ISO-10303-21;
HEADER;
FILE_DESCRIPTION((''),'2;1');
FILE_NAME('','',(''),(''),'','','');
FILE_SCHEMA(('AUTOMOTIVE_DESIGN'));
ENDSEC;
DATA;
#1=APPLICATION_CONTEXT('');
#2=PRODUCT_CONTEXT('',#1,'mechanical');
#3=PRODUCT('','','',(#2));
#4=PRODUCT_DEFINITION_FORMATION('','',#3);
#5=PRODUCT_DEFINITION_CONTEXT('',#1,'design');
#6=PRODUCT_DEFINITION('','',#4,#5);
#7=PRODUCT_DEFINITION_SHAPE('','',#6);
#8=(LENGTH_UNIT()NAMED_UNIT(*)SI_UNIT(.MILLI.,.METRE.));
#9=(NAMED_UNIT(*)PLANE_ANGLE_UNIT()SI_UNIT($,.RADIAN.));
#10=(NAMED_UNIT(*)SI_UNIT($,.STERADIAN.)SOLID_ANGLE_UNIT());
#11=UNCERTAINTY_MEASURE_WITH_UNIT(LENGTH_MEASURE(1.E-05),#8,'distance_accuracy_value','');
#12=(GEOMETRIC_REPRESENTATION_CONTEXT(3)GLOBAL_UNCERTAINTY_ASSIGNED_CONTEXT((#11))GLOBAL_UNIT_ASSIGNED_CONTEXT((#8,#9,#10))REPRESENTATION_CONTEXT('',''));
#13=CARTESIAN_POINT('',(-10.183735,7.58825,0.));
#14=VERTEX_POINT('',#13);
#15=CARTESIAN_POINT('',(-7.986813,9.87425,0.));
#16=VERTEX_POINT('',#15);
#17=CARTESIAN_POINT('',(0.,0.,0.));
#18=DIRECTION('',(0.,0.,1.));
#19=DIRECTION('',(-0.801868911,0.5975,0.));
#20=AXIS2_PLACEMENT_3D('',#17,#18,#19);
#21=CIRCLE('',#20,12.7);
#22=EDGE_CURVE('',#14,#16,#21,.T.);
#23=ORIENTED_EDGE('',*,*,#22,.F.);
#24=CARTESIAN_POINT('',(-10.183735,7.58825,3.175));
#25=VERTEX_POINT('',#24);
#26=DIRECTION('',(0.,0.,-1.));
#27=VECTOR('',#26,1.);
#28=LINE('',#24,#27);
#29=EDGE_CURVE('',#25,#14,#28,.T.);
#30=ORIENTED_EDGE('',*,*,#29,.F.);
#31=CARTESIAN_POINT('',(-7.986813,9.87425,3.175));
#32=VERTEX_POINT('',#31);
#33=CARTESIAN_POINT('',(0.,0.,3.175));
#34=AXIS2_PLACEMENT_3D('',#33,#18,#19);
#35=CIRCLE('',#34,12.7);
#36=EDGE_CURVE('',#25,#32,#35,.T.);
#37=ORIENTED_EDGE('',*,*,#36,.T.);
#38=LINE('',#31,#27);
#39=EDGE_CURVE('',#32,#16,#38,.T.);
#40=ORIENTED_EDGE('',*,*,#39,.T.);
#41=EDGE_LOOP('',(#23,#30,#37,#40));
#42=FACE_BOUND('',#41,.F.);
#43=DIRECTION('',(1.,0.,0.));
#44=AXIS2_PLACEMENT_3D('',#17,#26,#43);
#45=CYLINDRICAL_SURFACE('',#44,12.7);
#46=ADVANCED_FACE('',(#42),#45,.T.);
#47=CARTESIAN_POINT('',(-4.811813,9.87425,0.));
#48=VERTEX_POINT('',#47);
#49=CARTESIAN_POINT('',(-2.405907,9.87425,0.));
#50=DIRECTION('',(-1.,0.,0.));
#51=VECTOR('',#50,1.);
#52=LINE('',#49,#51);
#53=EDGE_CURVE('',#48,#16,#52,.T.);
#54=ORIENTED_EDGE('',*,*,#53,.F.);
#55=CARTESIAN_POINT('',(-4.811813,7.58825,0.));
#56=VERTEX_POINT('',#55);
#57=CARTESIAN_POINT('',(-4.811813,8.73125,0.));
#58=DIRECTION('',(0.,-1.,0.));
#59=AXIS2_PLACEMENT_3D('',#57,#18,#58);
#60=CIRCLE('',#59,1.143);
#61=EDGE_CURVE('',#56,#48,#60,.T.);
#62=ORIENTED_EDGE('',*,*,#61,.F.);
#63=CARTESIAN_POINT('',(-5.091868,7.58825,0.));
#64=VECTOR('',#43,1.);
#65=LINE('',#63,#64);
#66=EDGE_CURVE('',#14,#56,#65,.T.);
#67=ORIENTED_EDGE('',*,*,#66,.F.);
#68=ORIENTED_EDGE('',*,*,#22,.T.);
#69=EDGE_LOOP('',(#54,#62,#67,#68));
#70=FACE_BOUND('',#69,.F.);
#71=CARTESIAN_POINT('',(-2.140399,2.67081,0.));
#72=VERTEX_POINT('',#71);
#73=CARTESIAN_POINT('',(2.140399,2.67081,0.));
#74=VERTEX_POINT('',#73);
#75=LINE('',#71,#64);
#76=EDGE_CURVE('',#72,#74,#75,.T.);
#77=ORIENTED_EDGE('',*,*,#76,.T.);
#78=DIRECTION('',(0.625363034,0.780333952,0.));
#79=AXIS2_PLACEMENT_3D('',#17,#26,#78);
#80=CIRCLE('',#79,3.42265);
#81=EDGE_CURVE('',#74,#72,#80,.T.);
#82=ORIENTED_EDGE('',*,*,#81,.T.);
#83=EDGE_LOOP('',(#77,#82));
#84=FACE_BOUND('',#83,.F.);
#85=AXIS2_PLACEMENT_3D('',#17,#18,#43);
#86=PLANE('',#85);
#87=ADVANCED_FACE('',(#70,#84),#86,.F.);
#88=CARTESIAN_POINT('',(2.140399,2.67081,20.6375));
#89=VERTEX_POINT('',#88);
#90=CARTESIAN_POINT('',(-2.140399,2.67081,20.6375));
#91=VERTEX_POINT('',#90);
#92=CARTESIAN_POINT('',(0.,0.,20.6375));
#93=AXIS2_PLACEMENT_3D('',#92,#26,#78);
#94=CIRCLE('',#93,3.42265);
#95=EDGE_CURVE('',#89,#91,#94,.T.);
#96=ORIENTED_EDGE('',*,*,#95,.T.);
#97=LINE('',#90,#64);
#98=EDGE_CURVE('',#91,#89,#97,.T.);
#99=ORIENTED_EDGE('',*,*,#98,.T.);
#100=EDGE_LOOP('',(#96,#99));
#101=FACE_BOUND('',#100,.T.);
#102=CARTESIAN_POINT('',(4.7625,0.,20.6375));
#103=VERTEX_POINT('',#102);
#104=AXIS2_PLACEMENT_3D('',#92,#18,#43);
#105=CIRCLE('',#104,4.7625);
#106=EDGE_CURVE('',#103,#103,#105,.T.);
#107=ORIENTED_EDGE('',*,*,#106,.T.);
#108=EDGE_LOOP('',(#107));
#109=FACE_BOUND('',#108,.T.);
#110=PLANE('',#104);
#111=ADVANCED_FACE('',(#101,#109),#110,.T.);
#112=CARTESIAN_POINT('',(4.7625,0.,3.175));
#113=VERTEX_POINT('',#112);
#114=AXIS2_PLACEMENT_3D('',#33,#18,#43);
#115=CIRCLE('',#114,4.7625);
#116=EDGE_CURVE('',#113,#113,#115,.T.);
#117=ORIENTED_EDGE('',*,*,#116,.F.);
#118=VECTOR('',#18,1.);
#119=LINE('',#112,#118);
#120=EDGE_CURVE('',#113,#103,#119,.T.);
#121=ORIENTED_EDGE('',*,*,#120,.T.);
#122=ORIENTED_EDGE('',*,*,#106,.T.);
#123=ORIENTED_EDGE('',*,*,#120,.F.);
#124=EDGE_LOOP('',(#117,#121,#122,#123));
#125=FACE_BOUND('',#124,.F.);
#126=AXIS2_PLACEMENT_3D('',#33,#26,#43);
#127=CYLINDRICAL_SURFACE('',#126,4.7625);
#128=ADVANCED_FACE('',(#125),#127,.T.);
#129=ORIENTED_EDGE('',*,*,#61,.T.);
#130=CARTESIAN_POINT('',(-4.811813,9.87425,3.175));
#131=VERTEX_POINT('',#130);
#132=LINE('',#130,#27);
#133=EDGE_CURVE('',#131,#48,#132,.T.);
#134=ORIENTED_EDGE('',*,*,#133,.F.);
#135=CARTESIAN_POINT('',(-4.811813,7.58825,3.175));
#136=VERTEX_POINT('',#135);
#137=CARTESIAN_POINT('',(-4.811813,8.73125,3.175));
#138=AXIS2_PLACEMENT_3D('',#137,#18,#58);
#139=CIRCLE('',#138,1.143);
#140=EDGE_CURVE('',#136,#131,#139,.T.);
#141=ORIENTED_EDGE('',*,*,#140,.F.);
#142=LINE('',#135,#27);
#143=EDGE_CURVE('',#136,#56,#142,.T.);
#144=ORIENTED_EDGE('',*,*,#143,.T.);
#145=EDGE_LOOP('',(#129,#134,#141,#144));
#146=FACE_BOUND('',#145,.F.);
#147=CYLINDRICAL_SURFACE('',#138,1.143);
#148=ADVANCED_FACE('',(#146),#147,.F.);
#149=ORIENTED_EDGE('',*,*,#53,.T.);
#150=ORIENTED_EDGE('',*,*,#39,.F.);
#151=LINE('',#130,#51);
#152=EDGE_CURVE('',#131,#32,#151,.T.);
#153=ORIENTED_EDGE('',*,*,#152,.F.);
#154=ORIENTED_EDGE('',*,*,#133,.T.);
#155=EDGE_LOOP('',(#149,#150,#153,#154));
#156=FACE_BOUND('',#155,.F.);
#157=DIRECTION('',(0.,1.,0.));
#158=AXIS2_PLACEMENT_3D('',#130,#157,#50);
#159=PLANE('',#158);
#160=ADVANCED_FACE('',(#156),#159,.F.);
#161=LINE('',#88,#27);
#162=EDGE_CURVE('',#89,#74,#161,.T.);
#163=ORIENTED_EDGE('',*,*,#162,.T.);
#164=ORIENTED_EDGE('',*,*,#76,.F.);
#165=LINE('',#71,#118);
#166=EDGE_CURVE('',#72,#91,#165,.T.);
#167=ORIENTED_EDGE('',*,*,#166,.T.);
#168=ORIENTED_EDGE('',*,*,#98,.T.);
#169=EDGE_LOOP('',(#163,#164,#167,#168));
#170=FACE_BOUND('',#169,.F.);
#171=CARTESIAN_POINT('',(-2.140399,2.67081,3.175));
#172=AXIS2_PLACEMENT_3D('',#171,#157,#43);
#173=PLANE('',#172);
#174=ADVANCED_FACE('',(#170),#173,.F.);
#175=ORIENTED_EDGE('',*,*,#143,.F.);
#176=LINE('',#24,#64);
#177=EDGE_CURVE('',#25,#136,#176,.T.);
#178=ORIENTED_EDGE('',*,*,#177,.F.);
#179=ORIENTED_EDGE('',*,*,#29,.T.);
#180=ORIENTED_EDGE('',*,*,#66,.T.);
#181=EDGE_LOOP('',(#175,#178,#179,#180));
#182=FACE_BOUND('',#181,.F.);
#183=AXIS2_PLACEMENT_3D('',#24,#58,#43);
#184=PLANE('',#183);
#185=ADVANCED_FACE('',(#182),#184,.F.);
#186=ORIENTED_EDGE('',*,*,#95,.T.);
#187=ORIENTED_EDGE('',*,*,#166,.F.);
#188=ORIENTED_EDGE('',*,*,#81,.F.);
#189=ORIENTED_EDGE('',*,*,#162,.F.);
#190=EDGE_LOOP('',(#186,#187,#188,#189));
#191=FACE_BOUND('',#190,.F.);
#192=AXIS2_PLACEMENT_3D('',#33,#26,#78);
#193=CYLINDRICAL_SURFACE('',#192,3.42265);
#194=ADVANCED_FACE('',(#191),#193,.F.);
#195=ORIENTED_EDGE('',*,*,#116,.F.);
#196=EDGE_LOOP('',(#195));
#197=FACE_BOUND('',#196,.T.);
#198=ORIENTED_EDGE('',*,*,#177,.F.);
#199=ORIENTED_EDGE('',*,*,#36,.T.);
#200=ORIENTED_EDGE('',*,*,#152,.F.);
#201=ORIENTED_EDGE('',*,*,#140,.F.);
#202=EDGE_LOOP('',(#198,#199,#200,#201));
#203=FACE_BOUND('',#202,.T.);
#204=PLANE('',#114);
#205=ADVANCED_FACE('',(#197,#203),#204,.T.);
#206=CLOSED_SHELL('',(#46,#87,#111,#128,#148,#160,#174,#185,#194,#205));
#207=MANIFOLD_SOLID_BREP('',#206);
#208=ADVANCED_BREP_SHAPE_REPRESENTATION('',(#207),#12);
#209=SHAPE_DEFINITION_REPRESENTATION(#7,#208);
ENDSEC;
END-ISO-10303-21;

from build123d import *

# Parameters (mm, degrees)
F0_R     = 12.7
F1_DEPTH = 3.175
F2_R     = 4.7625
F3_DEPTH = 17.4625
F4_DEPTH = 25.4


# Not quite as in the source:
# - a length typed as a fraction of an inch, garbled in the dataset ("3 / 203.2 mm" for 3/8 in), is restored


with BuildPart() as f1:
    # F0 (on Top) → F1 (new body)
    with BuildSketch(Plane.XY):
        Circle(F0_R)
        with BuildLine():
            ThreePointArc((2.1403987868, 2.67081), (0, -3.42265), (-2.1403987868, 2.67081))
            Line((-2.1403987868, 2.67081), (2.1403987868, 2.67081))
        make_face(mode=Mode.SUBTRACT)
    extrude(amount=F1_DEPTH)

    # F2 (on face) → F3 (join)
    with BuildSketch(Plane.XY.offset(3.175)):
        Circle(F2_R)
        with BuildLine():
            Line((-2.1403987868, 2.67081), (2.1403987868, 2.67081))
            ThreePointArc((2.1403987868, 2.67081), (0, -3.42265), (-2.1403987868, 2.67081))
        make_face(mode=Mode.SUBTRACT)
    extrude(amount=F3_DEPTH)

    # F2 (on face) → F4 (cut)
    with BuildSketch(Plane.XY.offset(3.175)):
        with BuildLine():
            ThreePointArc((-4.8118133156, 7.58825), (-3.6688133156, 8.73125), (-4.8118133156, 9.87425))
            Line((-4.8118133156, 9.87425), (-7.9868133156, 9.87425))
            ThreePointArc((-7.9868133156, 9.87425), (-9.1568912319, 8.8000763046), (-10.1837351663, 7.58825))
            Line((-10.1837351663, 7.58825), (-4.8118133156, 7.58825))
        make_face()
    extrude(amount=-F4_DEPTH, mode=Mode.SUBTRACT)


solid = f1.part
